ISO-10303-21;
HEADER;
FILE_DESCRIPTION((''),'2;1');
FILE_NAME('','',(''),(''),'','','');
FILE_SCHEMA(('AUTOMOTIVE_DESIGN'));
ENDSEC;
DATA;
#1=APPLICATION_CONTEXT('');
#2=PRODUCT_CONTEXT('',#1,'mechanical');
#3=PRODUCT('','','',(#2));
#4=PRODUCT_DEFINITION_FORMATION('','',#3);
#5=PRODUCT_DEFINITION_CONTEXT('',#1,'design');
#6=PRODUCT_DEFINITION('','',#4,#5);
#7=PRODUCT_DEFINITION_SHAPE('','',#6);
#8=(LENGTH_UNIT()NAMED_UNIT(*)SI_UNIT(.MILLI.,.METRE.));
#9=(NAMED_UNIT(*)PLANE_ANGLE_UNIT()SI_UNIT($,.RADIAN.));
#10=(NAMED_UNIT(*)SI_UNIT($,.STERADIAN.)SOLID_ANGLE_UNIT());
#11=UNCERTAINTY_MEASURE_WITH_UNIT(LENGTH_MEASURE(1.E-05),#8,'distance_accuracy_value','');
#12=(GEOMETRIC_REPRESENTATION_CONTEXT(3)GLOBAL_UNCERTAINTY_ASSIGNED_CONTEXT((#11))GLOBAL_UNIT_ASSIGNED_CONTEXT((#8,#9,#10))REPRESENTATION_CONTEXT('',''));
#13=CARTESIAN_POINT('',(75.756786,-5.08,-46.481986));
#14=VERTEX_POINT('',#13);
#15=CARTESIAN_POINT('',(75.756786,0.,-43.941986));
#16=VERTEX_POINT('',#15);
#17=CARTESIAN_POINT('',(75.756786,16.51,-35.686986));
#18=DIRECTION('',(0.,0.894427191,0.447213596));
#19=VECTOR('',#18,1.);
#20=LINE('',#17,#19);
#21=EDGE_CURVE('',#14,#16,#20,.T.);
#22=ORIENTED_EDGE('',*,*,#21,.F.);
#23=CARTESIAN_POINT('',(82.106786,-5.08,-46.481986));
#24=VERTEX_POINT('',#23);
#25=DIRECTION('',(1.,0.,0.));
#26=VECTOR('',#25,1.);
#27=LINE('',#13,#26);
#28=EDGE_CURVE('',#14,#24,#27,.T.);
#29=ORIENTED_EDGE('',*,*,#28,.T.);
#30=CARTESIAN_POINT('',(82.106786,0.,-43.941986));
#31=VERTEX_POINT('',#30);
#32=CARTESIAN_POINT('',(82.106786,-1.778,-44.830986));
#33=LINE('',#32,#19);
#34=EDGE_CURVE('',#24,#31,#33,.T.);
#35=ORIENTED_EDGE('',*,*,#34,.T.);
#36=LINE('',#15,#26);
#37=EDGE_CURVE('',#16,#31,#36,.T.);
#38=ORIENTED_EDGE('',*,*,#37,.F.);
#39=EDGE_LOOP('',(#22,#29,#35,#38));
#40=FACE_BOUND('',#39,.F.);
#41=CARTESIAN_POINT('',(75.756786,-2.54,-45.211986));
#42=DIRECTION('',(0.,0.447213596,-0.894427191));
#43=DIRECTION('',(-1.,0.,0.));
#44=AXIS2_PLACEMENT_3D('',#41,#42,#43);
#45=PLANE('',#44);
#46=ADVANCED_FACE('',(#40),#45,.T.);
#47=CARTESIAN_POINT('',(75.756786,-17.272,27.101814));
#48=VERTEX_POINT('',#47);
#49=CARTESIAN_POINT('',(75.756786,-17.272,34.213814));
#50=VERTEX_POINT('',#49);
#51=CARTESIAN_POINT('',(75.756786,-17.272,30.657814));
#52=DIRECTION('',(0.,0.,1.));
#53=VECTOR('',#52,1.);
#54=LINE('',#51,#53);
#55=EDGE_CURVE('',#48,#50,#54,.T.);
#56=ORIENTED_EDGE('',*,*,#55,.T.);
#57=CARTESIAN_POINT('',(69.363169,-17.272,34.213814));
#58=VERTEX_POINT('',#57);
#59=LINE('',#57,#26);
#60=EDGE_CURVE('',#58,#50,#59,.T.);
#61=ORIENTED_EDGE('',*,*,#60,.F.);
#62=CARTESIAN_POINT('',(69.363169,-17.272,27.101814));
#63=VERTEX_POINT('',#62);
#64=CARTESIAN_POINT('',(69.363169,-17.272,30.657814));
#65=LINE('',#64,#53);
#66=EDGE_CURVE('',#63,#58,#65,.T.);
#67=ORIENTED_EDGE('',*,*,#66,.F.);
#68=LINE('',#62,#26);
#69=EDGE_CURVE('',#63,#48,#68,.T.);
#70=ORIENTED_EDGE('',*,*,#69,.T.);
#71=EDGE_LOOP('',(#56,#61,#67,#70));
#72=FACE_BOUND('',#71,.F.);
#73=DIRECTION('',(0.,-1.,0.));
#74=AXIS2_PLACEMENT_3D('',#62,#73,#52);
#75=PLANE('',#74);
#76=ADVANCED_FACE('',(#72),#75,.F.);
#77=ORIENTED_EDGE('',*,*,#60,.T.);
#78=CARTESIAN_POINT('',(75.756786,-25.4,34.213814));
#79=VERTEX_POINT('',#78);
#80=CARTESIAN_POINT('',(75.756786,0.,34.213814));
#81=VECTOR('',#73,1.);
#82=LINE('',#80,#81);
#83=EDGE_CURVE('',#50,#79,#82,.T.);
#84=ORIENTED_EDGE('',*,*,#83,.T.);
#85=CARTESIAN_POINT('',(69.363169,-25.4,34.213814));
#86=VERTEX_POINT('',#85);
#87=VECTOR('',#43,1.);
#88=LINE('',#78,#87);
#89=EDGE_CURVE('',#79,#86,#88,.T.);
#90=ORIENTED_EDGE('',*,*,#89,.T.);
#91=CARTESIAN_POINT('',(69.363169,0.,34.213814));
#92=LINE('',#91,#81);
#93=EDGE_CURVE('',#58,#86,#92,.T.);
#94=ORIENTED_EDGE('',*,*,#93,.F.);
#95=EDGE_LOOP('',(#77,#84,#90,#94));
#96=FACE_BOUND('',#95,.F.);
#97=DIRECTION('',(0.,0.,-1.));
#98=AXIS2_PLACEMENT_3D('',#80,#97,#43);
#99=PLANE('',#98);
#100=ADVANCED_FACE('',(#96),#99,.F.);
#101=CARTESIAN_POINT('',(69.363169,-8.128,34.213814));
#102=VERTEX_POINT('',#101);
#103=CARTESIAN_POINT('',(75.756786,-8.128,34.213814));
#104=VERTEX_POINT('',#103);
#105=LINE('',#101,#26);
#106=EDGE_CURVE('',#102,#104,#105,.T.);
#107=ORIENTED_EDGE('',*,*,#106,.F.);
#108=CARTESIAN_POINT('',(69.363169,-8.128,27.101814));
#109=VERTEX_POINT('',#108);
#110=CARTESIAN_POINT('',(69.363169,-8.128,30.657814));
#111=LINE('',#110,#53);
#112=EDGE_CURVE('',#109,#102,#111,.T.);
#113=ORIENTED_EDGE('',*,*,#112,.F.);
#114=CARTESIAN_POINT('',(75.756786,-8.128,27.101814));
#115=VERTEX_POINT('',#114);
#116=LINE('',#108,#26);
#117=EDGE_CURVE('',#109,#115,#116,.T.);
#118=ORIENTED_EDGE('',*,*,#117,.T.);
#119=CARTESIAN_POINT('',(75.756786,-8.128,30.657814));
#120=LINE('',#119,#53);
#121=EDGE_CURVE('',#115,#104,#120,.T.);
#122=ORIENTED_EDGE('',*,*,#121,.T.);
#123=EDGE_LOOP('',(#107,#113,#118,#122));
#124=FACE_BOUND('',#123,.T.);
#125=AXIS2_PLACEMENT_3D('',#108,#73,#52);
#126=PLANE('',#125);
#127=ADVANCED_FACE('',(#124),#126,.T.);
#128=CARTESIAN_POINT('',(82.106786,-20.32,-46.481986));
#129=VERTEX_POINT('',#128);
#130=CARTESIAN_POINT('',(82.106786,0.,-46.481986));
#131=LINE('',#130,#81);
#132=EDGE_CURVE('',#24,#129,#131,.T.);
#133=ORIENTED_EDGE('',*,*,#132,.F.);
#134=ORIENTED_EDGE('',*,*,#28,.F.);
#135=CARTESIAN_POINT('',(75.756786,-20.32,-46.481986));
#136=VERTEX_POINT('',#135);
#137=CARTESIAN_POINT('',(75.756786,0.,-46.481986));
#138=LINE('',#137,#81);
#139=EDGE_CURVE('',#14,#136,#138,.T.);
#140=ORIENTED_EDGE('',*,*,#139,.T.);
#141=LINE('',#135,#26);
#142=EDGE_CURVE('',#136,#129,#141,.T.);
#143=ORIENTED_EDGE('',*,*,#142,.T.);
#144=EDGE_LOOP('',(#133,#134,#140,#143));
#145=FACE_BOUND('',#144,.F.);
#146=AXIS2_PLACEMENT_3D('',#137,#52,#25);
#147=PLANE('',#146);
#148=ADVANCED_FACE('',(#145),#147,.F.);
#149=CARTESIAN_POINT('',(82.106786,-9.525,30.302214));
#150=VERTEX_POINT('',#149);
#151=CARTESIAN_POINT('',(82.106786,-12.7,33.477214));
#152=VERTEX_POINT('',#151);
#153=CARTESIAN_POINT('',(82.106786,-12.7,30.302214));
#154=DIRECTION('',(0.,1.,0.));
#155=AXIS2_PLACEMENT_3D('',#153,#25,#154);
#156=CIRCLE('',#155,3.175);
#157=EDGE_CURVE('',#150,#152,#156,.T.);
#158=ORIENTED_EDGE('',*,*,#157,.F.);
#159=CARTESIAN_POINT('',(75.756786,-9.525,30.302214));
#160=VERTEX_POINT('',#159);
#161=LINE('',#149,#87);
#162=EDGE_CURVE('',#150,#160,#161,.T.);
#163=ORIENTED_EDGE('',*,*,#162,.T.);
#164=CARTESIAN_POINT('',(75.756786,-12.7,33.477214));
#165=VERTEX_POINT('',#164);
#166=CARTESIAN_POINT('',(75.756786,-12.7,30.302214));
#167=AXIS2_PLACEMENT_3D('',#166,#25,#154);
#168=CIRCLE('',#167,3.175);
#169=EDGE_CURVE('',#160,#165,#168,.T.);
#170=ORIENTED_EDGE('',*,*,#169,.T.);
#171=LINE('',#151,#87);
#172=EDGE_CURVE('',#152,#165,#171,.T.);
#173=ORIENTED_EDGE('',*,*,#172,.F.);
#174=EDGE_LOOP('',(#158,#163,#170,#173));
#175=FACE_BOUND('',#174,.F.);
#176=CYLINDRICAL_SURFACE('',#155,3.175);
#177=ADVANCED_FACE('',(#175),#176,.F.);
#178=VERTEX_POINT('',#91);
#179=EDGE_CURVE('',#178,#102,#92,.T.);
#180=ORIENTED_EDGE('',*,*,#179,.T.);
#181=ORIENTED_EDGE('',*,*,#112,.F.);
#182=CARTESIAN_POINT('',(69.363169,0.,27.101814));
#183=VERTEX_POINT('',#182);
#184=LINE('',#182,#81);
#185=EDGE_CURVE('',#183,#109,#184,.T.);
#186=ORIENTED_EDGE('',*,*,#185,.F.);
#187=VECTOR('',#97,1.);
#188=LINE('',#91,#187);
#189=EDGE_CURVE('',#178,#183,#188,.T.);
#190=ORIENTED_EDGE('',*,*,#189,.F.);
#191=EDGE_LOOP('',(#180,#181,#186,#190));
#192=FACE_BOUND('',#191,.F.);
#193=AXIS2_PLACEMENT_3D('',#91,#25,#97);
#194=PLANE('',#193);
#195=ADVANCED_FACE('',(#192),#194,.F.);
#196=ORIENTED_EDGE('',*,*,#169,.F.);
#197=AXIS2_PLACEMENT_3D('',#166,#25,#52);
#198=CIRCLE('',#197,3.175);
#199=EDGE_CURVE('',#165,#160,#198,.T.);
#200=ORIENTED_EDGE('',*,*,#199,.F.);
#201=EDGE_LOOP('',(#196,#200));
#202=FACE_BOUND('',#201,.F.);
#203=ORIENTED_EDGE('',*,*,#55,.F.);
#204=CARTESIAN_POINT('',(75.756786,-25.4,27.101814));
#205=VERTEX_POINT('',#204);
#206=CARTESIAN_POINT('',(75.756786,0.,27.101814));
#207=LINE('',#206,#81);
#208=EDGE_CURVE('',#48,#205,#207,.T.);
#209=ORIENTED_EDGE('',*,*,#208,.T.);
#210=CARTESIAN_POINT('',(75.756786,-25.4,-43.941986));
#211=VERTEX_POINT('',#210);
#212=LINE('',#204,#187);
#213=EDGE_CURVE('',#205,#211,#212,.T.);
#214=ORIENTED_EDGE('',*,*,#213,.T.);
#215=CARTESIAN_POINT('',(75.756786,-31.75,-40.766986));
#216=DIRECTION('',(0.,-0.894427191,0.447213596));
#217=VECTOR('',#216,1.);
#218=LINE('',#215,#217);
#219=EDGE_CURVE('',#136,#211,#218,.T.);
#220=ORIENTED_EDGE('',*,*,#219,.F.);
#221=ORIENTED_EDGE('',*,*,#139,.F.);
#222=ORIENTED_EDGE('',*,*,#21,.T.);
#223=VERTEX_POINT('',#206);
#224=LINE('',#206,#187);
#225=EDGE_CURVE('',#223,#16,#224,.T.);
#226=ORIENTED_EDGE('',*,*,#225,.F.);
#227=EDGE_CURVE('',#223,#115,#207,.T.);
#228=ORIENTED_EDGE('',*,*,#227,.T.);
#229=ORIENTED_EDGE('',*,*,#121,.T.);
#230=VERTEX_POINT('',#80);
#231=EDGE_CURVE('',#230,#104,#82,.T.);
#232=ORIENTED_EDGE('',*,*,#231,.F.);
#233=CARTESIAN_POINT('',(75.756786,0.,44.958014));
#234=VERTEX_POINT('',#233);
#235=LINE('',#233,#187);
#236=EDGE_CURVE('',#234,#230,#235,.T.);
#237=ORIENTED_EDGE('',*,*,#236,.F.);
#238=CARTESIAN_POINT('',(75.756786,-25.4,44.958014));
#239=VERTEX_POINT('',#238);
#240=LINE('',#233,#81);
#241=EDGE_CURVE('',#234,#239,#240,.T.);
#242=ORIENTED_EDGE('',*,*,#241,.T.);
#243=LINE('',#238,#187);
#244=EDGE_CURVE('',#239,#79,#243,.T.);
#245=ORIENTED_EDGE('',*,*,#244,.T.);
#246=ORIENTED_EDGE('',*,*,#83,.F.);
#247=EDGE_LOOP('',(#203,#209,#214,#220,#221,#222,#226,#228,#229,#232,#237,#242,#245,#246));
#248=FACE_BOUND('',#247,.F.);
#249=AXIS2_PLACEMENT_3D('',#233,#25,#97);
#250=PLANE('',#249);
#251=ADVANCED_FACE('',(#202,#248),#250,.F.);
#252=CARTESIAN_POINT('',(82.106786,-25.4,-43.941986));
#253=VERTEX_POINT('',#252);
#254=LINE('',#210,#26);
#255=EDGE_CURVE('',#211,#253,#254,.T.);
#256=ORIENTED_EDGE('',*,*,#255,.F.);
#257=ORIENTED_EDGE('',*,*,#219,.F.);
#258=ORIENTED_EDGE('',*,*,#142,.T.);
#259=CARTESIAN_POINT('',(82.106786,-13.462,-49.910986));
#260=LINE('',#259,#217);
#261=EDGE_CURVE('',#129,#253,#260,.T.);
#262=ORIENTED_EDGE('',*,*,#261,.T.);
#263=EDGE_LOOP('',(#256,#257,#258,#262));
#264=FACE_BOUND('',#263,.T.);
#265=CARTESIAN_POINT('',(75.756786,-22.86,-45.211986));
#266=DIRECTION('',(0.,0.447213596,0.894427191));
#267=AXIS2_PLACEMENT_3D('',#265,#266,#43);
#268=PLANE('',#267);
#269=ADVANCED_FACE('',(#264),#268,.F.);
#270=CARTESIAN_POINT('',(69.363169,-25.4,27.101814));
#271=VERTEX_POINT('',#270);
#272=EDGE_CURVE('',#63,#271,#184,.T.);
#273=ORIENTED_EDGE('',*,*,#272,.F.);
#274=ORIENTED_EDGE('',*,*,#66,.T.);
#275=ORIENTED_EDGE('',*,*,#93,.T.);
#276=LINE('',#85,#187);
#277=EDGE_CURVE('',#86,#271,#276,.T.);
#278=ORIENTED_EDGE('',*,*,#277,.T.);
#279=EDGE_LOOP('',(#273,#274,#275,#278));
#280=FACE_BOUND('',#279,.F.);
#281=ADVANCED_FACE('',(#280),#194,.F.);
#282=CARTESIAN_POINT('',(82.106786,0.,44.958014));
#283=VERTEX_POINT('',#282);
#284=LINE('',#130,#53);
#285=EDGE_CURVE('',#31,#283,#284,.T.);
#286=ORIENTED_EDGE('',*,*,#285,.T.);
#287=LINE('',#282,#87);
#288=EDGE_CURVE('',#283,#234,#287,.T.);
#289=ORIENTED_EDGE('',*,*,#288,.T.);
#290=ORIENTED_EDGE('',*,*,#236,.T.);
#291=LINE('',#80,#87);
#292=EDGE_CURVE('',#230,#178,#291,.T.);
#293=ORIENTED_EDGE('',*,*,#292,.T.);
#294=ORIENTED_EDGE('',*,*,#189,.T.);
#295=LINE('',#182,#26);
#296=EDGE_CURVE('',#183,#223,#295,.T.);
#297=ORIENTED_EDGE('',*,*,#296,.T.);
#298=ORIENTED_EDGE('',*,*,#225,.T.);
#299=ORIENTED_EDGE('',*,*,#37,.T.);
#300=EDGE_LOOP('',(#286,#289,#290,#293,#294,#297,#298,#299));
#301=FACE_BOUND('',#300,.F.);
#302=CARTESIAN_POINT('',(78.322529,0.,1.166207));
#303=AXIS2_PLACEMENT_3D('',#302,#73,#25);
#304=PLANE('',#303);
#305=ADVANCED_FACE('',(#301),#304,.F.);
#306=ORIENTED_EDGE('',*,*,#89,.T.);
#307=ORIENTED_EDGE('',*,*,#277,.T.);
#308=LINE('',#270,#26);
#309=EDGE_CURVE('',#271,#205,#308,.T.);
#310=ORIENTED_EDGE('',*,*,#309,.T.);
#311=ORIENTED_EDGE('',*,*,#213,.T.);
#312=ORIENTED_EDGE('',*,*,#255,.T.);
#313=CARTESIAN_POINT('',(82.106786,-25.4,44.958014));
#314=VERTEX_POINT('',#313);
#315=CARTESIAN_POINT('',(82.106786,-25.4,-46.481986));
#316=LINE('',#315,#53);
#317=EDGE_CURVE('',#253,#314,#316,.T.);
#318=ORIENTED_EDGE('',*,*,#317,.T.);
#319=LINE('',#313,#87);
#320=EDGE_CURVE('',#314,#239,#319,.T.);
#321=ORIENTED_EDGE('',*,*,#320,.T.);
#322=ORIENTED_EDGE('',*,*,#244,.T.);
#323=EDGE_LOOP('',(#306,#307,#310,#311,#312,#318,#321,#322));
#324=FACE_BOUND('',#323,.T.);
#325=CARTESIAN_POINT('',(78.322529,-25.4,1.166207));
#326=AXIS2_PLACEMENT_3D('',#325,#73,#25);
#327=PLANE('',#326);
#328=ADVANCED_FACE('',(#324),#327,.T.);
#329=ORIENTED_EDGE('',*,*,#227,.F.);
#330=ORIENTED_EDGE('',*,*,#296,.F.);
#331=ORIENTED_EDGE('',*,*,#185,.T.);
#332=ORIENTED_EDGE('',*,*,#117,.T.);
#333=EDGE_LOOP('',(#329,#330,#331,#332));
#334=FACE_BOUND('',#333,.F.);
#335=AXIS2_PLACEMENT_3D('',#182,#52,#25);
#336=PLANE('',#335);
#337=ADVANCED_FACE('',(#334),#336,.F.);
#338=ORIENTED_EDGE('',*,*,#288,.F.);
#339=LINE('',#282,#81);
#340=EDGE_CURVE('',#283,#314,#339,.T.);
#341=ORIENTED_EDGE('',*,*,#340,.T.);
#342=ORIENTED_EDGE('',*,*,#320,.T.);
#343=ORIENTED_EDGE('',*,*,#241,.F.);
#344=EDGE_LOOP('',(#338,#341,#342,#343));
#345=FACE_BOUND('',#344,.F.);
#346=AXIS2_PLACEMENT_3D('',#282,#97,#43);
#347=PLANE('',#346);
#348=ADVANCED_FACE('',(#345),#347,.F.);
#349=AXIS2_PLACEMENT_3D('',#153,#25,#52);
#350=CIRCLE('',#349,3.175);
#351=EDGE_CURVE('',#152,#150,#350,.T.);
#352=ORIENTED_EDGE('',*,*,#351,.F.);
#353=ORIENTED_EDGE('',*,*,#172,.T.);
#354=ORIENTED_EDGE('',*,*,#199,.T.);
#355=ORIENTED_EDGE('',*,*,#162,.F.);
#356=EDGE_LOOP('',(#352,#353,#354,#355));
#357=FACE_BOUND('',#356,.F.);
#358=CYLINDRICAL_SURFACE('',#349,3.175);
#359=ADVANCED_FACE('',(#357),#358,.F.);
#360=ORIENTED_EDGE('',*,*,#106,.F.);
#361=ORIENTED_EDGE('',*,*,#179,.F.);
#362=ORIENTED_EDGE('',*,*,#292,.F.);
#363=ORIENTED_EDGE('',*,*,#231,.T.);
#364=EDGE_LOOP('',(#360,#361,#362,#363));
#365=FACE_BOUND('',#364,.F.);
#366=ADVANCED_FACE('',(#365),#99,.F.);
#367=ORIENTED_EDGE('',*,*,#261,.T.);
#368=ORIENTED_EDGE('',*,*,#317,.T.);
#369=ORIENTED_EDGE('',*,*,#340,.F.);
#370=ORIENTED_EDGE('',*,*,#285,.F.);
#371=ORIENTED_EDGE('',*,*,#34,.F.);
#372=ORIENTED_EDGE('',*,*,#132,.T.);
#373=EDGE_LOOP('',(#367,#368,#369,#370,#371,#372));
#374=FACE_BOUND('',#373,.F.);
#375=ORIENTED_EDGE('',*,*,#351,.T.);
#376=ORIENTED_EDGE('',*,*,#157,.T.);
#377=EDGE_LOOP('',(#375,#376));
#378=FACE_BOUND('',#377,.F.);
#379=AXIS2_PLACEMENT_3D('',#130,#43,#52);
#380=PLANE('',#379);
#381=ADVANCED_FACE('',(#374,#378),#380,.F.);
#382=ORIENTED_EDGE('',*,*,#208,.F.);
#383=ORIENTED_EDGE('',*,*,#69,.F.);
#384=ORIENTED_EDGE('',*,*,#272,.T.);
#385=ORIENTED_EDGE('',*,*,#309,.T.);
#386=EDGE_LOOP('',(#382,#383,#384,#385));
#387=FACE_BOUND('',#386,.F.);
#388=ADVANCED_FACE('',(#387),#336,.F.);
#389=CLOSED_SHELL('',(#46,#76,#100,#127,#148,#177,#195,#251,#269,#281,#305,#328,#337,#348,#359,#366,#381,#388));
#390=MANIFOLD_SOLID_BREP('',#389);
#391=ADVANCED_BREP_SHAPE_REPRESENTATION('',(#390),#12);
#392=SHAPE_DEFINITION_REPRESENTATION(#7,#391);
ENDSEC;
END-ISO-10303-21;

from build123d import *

# Parameters (mm, degrees)
F1_DEPTH = 25.4
F3_W     = 9.144
F3_H     = 7.112
F4_DEPTH = 6.3936169982
F5_DEPTH = 6.35
F6_SIZE2 = 2.54
F6_SIZE  = 5.08


with BuildPart() as f1:
    # F0 (on Front) → F1 (new body)
    with BuildSketch(Plane.XZ):
        Polygon((82.1067863703, 44.9580137503), (75.7567863703, 44.9580137503), (75.7567863703, 34.2138137503), (69.3631693721, 34.2138137503), (69.3631693721, 27.1018137503), (75.7567863703, 27.1018137503), (75.7567863703, -46.4819862497), (82.1067863703, -46.4819862497), align=None)
    extrude(amount=F1_DEPTH)

    # F3 (on face) → F4 (cut, through all)
    with BuildSketch(Plane(origin=(69.3631693721, 0, 0), x_dir=(0, -1, 0), z_dir=(-1, 0, 0))):
        with Locations((12.7, 30.6578137503)):
            Rectangle(F3_W, F3_H)
    extrude(amount=-F4_DEPTH, mode=Mode.SUBTRACT)

    # F2 (on face) → F5 (cut, through all)
    with BuildSketch(Plane.YZ.offset(82.1067863703)):
        with BuildLine():
            ThreePointArc((-9.525, 30.3022137503), (-10.4549359697, 32.5472777806), (-12.7, 33.4772137503))
            ThreePointArc((-12.7, 33.4772137503), (-14.9450640303, 28.05714972), (-9.525, 30.3022137503))
        make_face()
    extrude(amount=-F5_DEPTH, mode=Mode.SUBTRACT)

    # F6
    f6_edges = [f1.edges().sort_by_distance(p)[0] for p in [
        (78.931786, -25.4, -46.481986),
        (78.931786, 0, -46.481986),
    ]]
    f6_side = f1.faces().sort_by_distance((78.931786, -12.7, -46.481986))[0]
    chamfer(f6_edges, length=F6_SIZE, length2=F6_SIZE2, reference=f6_side)


solid = f1.part
